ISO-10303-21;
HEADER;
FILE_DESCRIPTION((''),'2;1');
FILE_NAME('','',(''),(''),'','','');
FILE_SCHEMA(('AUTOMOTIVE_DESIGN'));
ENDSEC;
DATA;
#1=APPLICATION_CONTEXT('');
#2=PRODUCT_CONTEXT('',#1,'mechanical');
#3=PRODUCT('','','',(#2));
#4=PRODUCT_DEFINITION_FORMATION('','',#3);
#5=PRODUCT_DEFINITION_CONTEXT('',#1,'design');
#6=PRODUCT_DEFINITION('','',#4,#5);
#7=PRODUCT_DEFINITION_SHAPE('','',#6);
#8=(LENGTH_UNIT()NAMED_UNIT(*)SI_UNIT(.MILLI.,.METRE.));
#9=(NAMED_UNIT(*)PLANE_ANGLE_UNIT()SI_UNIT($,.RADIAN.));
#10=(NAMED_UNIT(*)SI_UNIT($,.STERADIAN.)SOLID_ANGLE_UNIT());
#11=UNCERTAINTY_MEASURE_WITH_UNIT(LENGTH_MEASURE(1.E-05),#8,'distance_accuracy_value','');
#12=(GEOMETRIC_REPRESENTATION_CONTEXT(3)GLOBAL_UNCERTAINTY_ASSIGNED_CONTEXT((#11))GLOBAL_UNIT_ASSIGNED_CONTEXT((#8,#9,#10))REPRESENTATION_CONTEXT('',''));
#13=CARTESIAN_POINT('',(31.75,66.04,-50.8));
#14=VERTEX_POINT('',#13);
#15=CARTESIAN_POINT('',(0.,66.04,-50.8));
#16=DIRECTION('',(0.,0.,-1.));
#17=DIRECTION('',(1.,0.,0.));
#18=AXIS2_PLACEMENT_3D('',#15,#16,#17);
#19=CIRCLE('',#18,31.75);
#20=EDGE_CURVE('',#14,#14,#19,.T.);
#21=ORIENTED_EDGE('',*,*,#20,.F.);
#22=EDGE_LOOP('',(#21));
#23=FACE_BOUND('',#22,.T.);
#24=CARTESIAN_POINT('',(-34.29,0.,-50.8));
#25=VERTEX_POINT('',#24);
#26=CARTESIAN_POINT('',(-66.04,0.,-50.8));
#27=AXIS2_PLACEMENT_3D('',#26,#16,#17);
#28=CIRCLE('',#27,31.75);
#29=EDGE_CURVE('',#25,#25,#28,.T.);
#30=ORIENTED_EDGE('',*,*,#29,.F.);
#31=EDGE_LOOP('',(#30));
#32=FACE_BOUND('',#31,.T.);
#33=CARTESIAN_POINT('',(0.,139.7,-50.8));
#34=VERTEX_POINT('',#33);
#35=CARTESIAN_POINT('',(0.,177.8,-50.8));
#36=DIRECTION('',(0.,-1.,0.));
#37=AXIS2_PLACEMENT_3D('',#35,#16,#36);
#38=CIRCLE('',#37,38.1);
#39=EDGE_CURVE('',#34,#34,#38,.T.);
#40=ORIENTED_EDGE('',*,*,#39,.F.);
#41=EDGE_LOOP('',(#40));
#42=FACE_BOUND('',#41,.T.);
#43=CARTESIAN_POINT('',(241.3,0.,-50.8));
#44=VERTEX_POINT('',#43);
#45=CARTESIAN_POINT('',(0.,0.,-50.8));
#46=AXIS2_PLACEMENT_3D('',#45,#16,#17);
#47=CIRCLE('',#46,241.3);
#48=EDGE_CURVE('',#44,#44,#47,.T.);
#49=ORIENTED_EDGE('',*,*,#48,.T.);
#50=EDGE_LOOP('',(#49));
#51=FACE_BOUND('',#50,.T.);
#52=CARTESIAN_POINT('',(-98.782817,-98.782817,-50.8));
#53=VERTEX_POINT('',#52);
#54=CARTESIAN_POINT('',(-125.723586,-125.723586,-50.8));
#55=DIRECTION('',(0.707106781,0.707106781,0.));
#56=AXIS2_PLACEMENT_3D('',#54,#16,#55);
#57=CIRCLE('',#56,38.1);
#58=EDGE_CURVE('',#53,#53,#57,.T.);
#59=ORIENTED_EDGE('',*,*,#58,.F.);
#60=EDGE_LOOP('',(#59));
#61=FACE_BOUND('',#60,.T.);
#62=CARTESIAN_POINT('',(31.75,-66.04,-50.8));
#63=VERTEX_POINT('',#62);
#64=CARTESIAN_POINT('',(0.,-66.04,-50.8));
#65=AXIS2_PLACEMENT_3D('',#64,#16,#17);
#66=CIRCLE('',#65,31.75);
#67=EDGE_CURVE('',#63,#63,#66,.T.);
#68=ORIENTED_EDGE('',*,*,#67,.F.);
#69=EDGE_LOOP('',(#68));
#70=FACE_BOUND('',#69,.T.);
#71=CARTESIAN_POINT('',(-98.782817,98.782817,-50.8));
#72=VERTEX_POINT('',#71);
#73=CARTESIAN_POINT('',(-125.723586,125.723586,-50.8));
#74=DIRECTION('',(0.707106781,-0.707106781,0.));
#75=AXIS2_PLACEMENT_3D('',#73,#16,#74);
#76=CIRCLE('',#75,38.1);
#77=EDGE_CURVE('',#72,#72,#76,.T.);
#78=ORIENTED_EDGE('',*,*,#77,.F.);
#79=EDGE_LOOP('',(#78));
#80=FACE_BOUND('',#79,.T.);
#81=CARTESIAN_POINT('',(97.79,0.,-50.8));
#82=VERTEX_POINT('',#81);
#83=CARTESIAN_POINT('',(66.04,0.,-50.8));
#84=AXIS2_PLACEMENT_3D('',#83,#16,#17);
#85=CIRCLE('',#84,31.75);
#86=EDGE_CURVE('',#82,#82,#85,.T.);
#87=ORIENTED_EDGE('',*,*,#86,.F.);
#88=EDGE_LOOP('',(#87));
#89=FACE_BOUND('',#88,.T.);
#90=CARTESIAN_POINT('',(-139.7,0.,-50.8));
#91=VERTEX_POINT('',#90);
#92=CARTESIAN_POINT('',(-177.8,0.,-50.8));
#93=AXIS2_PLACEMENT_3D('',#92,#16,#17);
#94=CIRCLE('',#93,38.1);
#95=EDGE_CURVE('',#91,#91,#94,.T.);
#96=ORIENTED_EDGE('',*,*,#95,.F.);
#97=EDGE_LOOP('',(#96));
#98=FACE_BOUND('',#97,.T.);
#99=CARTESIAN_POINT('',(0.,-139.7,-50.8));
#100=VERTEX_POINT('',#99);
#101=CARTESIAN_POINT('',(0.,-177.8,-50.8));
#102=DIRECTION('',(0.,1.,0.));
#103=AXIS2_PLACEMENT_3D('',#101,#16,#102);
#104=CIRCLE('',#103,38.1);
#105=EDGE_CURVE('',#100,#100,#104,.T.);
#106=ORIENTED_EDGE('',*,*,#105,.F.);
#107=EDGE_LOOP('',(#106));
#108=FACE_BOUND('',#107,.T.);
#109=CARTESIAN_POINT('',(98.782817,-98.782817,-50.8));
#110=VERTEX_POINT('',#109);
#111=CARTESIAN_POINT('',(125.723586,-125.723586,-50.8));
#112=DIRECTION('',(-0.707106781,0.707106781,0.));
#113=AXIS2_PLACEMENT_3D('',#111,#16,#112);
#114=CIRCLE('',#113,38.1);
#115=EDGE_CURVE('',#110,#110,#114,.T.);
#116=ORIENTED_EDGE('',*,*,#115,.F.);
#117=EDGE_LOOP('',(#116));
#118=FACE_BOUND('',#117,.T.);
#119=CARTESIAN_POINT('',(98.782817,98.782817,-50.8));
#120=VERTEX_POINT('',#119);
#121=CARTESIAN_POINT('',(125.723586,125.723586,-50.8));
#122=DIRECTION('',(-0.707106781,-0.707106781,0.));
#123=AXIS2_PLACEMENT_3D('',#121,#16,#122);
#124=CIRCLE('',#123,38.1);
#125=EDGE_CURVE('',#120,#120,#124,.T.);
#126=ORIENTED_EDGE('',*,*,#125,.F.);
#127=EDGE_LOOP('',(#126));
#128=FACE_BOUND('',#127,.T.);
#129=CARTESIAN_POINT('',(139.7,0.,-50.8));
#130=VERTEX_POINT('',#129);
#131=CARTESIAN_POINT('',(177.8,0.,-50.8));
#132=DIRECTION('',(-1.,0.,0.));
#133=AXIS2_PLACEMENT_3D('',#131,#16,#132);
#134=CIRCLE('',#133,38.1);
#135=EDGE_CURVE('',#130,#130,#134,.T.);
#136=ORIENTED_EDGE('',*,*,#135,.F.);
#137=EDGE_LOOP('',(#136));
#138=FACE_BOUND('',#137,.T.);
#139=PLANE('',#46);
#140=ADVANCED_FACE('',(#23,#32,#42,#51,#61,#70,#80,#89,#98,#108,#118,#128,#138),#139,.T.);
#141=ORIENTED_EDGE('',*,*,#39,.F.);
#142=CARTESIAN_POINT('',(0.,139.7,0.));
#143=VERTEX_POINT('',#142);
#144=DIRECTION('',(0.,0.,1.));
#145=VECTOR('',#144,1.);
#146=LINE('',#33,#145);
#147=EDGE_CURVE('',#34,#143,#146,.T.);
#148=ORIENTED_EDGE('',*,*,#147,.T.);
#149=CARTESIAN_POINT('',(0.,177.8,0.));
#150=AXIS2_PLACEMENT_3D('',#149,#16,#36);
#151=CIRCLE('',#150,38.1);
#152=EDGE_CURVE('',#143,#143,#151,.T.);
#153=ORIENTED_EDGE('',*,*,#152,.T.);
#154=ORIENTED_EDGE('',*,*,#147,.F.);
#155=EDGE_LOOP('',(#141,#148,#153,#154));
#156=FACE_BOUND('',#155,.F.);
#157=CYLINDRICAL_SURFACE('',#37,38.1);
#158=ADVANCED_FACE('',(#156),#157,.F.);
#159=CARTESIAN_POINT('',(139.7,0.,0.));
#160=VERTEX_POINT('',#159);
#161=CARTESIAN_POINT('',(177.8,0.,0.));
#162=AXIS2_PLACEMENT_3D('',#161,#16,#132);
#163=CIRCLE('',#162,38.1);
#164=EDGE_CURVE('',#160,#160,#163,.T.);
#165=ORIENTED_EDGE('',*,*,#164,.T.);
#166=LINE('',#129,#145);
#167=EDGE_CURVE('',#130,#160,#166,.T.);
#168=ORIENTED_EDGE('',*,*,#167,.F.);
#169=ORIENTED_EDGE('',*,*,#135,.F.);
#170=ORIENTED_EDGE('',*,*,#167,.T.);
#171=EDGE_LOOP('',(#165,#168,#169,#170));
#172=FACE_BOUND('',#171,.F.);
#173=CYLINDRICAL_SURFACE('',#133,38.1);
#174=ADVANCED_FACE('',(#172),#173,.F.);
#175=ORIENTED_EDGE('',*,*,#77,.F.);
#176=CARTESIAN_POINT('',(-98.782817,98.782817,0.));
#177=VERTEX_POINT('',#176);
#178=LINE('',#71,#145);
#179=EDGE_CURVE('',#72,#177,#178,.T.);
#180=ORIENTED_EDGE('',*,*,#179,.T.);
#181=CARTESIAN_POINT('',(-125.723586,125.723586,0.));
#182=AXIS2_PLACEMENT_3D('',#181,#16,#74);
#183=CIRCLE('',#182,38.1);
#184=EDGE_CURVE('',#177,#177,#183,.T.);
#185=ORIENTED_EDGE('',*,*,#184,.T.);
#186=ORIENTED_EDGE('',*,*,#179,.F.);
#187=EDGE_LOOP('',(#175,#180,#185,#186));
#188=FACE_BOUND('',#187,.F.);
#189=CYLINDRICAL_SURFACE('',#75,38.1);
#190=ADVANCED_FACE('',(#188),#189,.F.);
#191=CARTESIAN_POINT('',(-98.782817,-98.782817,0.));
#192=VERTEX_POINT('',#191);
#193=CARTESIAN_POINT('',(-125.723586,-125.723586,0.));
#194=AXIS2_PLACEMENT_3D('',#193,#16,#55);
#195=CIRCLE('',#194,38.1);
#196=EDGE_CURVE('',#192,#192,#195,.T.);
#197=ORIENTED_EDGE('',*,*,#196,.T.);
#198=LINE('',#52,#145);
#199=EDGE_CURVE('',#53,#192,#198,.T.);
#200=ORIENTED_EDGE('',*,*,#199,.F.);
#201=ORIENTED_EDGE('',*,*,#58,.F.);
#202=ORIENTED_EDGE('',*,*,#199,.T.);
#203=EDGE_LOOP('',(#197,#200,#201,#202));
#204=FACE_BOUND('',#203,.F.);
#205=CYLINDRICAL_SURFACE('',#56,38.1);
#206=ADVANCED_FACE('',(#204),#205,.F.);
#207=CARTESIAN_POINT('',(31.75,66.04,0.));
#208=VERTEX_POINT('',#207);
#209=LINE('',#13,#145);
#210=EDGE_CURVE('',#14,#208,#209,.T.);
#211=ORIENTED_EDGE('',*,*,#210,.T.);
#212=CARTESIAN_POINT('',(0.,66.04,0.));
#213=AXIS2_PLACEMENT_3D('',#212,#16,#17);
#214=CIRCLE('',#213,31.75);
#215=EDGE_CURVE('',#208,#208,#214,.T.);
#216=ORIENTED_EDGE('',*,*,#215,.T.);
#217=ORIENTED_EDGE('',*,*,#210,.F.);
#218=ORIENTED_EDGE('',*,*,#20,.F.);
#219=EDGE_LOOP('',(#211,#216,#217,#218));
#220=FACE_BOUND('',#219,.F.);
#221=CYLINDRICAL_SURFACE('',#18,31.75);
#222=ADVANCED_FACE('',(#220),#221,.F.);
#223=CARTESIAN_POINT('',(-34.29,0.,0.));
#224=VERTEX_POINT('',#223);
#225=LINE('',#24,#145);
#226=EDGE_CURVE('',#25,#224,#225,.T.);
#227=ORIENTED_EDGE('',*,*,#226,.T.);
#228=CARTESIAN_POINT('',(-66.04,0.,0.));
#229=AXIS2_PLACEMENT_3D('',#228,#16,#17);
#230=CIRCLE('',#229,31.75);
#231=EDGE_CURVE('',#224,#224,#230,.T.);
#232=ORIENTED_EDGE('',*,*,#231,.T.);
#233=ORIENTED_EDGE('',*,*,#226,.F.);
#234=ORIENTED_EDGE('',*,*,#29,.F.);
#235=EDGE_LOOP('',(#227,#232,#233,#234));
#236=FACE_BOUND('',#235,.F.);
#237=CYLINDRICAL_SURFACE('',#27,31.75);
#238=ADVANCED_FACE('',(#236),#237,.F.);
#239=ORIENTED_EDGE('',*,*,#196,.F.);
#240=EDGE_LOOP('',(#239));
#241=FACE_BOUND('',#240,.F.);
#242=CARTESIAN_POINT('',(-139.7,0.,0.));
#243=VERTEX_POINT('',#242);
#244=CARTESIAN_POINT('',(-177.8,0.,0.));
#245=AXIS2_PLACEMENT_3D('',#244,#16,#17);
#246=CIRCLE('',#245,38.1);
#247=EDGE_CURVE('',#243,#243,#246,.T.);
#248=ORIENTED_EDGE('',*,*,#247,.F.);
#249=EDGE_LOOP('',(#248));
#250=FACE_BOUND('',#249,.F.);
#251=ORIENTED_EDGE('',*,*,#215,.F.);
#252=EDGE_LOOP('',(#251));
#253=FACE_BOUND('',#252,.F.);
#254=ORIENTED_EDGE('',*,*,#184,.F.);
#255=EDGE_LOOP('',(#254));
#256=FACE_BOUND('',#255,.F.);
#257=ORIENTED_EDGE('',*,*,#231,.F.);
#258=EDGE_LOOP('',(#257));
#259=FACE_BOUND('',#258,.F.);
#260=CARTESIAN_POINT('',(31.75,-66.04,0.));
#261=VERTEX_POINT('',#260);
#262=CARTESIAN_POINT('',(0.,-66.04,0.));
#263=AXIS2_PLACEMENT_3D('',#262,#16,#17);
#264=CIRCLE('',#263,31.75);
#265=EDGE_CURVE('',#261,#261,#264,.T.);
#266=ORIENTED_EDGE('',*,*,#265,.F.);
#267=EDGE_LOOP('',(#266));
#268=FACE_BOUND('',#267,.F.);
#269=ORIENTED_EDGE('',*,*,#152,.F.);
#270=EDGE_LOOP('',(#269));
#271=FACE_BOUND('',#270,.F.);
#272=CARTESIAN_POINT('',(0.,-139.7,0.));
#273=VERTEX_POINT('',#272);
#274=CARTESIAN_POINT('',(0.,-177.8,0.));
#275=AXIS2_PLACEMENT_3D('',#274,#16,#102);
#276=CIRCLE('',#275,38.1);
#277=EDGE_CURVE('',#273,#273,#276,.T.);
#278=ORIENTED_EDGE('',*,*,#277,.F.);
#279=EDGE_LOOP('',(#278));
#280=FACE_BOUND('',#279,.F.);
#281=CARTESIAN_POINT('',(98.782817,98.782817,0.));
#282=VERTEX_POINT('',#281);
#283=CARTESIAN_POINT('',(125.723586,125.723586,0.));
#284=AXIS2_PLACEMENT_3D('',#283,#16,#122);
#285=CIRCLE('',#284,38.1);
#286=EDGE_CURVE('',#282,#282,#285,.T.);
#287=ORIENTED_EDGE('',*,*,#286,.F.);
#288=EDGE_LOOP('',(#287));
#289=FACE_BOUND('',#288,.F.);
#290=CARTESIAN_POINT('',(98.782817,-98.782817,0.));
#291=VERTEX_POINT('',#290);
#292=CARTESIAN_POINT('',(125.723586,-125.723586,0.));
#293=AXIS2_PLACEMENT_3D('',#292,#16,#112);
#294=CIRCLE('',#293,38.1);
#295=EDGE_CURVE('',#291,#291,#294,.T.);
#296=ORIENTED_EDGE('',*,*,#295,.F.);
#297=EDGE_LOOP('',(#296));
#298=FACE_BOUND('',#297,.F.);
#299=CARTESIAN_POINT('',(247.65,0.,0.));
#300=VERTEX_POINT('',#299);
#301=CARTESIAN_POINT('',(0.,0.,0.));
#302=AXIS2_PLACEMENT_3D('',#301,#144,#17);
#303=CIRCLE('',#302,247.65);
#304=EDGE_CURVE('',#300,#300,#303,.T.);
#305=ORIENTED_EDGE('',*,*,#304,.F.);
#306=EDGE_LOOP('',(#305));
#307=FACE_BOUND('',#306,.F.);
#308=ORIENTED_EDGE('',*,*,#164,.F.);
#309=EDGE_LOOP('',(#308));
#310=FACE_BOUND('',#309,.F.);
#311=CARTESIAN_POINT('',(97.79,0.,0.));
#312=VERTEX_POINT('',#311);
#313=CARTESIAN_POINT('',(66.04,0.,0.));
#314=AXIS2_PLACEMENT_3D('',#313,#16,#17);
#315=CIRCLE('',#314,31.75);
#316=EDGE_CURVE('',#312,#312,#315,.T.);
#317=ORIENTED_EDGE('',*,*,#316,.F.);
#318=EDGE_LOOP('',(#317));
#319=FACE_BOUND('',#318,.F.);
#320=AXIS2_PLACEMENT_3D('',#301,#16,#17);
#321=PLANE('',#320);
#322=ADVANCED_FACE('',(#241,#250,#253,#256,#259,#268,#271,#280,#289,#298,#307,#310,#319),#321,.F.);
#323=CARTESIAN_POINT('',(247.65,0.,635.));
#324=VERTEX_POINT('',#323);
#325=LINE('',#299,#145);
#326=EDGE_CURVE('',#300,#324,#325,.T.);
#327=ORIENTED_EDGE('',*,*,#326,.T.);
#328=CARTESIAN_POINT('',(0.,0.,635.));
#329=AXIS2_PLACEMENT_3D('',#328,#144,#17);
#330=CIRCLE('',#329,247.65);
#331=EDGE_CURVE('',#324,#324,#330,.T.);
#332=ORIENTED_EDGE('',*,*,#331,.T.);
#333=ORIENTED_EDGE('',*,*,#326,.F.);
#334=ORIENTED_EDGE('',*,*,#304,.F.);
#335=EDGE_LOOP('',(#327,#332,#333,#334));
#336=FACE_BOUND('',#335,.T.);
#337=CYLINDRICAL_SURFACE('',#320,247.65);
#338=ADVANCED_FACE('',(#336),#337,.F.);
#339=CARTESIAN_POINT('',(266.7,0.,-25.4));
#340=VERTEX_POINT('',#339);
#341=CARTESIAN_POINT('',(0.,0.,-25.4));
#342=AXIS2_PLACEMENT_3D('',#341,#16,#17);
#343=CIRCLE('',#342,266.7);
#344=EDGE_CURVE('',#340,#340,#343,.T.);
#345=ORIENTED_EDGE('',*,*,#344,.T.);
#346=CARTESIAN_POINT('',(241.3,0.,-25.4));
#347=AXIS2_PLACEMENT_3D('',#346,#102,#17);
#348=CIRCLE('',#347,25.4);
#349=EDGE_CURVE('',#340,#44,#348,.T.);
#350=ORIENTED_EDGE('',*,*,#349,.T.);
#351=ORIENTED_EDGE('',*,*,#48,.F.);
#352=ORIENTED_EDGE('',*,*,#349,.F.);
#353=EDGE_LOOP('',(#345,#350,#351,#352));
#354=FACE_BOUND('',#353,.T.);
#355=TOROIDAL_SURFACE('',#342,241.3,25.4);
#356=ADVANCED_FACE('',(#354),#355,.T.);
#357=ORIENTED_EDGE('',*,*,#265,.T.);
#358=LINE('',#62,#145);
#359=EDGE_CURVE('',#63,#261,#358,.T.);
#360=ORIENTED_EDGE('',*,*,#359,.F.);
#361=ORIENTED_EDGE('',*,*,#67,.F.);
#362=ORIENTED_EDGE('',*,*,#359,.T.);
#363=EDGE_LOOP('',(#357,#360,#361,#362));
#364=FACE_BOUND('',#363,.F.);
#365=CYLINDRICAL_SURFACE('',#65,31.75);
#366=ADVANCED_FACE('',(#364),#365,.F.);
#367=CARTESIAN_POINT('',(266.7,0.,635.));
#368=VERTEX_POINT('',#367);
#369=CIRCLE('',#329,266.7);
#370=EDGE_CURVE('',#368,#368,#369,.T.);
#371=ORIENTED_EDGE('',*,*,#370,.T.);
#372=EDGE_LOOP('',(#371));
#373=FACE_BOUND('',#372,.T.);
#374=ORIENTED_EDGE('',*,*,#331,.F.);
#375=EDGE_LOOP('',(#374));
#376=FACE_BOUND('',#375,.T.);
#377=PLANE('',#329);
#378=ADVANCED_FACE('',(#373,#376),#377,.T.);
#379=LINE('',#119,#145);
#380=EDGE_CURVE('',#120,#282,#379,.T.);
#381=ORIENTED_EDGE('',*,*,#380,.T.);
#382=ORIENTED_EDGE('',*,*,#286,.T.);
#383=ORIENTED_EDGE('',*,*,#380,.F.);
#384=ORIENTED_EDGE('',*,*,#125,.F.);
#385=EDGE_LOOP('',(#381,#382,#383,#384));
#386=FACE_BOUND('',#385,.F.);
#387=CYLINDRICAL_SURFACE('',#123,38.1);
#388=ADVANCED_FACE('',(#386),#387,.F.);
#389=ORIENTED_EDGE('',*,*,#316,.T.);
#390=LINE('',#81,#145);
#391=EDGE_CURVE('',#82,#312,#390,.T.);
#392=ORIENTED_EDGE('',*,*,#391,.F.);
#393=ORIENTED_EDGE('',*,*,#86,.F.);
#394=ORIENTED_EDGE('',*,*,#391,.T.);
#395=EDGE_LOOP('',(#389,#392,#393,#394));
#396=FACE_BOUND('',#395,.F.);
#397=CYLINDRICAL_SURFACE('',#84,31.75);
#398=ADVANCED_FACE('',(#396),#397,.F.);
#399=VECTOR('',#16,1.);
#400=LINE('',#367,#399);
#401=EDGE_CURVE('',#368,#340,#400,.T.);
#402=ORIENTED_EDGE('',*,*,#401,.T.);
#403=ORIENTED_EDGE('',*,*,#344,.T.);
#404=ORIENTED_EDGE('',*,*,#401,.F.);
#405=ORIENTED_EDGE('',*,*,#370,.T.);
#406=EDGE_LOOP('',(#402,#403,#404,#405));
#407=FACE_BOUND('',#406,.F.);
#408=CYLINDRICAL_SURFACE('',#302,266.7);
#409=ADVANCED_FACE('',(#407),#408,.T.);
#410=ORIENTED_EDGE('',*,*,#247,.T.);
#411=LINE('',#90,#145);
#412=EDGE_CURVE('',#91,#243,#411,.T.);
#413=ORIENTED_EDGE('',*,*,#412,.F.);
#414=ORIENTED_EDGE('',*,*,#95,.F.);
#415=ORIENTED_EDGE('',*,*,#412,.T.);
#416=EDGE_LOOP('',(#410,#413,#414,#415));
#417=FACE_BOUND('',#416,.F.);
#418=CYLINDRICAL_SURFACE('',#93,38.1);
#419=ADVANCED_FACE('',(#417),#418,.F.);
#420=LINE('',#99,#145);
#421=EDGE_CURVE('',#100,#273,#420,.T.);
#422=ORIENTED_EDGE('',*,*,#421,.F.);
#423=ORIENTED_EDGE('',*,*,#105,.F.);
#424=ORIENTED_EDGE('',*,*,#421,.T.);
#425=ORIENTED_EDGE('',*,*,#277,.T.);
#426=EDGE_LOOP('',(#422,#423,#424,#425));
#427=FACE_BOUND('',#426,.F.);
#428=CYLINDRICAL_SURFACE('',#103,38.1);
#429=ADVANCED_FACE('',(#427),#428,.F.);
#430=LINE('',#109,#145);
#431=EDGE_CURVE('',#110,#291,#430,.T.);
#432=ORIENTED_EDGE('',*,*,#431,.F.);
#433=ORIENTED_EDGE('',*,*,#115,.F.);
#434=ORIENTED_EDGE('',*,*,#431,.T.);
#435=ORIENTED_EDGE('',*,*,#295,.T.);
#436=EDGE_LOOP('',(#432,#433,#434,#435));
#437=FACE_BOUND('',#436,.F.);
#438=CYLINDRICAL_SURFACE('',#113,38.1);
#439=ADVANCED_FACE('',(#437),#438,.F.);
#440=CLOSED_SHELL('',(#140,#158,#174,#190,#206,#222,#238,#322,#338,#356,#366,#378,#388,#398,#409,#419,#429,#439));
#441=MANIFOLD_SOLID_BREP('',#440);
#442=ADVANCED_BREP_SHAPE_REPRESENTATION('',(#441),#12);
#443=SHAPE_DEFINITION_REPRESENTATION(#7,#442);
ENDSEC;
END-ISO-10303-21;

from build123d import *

# Parameters (mm, degrees)
F0_R            = 266.7
F0_R_2          = 247.65
F1_DEPTH        = 635
F2_R            = 266.7
F3_DEPTH        = 50.8
F4_R            = 25.4
F5_R            = 38.1
F7_DEPTH        = 50.8
F7_COPIES_COUNT = 8
F8_R            = 31.75
F9_DEPTH        = 50.8


# Not quite as in the source:
# - a pattern or mirror of a feature is missing from the dataset's text; its kind, count and spacing are read off the source's solid
# - a feature names something its author has since deleted; it is built from what else it names


with BuildPart() as f1:
    # F0 (on Top) → F1 (new body)
    with BuildSketch(Plane.XY):
        Circle(F0_R)
        Circle(F0_R_2, mode=Mode.SUBTRACT)
    extrude(amount=F1_DEPTH)

    # F2 (on face) → F3 (join)
    with BuildSketch(Plane(origin=(0, 0, 0), x_dir=(1, 0, 0), z_dir=(0, 0, -1))):
        Circle(F2_R)
    extrude(amount=F3_DEPTH)

    # F4
    f4_edges = [f1.edges().sort_by_distance(p)[0] for p in [
        (-266.7, 0, -50.8),
    ]]
    fillet(f4_edges, radius=F4_R)

    # F5 (on face) → F7 (cut, through all)
    with BuildSketch(Plane(origin=(0, 0, -50.8), x_dir=(1, 0, 0), z_dir=(0, 0, -1))):
        with Locations((-177.8, 0)):
            Circle(F5_R)
    f7 = extrude(amount=-F7_DEPTH, mode=Mode.SUBTRACT)

    # F7_copies: F7 ×8 about axis
    f7_copies_axis = Axis((0, 0, 0), (0, 0, 1))
    for i in range(1, F7_COPIES_COUNT):
        add(f7.rotate(f7_copies_axis, i * 360 / F7_COPIES_COUNT), mode=Mode.SUBTRACT)

    # F8 (on face) → F9 (cut, through all)
    with BuildSketch(Plane(origin=(0, 0, -50.8), x_dir=(1, 0, 0), z_dir=(0, 0, -1))):
        with Locations((0, 66.04)):
            Circle(F8_R)
        with Locations((66.04, 0)):
            Circle(F8_R)
        with Locations((-66.04, 0)):
            Circle(F8_R)
        with Locations((0, -66.04)):
            Circle(F8_R)
    extrude(amount=-F9_DEPTH, mode=Mode.SUBTRACT)


solid = f1.part
